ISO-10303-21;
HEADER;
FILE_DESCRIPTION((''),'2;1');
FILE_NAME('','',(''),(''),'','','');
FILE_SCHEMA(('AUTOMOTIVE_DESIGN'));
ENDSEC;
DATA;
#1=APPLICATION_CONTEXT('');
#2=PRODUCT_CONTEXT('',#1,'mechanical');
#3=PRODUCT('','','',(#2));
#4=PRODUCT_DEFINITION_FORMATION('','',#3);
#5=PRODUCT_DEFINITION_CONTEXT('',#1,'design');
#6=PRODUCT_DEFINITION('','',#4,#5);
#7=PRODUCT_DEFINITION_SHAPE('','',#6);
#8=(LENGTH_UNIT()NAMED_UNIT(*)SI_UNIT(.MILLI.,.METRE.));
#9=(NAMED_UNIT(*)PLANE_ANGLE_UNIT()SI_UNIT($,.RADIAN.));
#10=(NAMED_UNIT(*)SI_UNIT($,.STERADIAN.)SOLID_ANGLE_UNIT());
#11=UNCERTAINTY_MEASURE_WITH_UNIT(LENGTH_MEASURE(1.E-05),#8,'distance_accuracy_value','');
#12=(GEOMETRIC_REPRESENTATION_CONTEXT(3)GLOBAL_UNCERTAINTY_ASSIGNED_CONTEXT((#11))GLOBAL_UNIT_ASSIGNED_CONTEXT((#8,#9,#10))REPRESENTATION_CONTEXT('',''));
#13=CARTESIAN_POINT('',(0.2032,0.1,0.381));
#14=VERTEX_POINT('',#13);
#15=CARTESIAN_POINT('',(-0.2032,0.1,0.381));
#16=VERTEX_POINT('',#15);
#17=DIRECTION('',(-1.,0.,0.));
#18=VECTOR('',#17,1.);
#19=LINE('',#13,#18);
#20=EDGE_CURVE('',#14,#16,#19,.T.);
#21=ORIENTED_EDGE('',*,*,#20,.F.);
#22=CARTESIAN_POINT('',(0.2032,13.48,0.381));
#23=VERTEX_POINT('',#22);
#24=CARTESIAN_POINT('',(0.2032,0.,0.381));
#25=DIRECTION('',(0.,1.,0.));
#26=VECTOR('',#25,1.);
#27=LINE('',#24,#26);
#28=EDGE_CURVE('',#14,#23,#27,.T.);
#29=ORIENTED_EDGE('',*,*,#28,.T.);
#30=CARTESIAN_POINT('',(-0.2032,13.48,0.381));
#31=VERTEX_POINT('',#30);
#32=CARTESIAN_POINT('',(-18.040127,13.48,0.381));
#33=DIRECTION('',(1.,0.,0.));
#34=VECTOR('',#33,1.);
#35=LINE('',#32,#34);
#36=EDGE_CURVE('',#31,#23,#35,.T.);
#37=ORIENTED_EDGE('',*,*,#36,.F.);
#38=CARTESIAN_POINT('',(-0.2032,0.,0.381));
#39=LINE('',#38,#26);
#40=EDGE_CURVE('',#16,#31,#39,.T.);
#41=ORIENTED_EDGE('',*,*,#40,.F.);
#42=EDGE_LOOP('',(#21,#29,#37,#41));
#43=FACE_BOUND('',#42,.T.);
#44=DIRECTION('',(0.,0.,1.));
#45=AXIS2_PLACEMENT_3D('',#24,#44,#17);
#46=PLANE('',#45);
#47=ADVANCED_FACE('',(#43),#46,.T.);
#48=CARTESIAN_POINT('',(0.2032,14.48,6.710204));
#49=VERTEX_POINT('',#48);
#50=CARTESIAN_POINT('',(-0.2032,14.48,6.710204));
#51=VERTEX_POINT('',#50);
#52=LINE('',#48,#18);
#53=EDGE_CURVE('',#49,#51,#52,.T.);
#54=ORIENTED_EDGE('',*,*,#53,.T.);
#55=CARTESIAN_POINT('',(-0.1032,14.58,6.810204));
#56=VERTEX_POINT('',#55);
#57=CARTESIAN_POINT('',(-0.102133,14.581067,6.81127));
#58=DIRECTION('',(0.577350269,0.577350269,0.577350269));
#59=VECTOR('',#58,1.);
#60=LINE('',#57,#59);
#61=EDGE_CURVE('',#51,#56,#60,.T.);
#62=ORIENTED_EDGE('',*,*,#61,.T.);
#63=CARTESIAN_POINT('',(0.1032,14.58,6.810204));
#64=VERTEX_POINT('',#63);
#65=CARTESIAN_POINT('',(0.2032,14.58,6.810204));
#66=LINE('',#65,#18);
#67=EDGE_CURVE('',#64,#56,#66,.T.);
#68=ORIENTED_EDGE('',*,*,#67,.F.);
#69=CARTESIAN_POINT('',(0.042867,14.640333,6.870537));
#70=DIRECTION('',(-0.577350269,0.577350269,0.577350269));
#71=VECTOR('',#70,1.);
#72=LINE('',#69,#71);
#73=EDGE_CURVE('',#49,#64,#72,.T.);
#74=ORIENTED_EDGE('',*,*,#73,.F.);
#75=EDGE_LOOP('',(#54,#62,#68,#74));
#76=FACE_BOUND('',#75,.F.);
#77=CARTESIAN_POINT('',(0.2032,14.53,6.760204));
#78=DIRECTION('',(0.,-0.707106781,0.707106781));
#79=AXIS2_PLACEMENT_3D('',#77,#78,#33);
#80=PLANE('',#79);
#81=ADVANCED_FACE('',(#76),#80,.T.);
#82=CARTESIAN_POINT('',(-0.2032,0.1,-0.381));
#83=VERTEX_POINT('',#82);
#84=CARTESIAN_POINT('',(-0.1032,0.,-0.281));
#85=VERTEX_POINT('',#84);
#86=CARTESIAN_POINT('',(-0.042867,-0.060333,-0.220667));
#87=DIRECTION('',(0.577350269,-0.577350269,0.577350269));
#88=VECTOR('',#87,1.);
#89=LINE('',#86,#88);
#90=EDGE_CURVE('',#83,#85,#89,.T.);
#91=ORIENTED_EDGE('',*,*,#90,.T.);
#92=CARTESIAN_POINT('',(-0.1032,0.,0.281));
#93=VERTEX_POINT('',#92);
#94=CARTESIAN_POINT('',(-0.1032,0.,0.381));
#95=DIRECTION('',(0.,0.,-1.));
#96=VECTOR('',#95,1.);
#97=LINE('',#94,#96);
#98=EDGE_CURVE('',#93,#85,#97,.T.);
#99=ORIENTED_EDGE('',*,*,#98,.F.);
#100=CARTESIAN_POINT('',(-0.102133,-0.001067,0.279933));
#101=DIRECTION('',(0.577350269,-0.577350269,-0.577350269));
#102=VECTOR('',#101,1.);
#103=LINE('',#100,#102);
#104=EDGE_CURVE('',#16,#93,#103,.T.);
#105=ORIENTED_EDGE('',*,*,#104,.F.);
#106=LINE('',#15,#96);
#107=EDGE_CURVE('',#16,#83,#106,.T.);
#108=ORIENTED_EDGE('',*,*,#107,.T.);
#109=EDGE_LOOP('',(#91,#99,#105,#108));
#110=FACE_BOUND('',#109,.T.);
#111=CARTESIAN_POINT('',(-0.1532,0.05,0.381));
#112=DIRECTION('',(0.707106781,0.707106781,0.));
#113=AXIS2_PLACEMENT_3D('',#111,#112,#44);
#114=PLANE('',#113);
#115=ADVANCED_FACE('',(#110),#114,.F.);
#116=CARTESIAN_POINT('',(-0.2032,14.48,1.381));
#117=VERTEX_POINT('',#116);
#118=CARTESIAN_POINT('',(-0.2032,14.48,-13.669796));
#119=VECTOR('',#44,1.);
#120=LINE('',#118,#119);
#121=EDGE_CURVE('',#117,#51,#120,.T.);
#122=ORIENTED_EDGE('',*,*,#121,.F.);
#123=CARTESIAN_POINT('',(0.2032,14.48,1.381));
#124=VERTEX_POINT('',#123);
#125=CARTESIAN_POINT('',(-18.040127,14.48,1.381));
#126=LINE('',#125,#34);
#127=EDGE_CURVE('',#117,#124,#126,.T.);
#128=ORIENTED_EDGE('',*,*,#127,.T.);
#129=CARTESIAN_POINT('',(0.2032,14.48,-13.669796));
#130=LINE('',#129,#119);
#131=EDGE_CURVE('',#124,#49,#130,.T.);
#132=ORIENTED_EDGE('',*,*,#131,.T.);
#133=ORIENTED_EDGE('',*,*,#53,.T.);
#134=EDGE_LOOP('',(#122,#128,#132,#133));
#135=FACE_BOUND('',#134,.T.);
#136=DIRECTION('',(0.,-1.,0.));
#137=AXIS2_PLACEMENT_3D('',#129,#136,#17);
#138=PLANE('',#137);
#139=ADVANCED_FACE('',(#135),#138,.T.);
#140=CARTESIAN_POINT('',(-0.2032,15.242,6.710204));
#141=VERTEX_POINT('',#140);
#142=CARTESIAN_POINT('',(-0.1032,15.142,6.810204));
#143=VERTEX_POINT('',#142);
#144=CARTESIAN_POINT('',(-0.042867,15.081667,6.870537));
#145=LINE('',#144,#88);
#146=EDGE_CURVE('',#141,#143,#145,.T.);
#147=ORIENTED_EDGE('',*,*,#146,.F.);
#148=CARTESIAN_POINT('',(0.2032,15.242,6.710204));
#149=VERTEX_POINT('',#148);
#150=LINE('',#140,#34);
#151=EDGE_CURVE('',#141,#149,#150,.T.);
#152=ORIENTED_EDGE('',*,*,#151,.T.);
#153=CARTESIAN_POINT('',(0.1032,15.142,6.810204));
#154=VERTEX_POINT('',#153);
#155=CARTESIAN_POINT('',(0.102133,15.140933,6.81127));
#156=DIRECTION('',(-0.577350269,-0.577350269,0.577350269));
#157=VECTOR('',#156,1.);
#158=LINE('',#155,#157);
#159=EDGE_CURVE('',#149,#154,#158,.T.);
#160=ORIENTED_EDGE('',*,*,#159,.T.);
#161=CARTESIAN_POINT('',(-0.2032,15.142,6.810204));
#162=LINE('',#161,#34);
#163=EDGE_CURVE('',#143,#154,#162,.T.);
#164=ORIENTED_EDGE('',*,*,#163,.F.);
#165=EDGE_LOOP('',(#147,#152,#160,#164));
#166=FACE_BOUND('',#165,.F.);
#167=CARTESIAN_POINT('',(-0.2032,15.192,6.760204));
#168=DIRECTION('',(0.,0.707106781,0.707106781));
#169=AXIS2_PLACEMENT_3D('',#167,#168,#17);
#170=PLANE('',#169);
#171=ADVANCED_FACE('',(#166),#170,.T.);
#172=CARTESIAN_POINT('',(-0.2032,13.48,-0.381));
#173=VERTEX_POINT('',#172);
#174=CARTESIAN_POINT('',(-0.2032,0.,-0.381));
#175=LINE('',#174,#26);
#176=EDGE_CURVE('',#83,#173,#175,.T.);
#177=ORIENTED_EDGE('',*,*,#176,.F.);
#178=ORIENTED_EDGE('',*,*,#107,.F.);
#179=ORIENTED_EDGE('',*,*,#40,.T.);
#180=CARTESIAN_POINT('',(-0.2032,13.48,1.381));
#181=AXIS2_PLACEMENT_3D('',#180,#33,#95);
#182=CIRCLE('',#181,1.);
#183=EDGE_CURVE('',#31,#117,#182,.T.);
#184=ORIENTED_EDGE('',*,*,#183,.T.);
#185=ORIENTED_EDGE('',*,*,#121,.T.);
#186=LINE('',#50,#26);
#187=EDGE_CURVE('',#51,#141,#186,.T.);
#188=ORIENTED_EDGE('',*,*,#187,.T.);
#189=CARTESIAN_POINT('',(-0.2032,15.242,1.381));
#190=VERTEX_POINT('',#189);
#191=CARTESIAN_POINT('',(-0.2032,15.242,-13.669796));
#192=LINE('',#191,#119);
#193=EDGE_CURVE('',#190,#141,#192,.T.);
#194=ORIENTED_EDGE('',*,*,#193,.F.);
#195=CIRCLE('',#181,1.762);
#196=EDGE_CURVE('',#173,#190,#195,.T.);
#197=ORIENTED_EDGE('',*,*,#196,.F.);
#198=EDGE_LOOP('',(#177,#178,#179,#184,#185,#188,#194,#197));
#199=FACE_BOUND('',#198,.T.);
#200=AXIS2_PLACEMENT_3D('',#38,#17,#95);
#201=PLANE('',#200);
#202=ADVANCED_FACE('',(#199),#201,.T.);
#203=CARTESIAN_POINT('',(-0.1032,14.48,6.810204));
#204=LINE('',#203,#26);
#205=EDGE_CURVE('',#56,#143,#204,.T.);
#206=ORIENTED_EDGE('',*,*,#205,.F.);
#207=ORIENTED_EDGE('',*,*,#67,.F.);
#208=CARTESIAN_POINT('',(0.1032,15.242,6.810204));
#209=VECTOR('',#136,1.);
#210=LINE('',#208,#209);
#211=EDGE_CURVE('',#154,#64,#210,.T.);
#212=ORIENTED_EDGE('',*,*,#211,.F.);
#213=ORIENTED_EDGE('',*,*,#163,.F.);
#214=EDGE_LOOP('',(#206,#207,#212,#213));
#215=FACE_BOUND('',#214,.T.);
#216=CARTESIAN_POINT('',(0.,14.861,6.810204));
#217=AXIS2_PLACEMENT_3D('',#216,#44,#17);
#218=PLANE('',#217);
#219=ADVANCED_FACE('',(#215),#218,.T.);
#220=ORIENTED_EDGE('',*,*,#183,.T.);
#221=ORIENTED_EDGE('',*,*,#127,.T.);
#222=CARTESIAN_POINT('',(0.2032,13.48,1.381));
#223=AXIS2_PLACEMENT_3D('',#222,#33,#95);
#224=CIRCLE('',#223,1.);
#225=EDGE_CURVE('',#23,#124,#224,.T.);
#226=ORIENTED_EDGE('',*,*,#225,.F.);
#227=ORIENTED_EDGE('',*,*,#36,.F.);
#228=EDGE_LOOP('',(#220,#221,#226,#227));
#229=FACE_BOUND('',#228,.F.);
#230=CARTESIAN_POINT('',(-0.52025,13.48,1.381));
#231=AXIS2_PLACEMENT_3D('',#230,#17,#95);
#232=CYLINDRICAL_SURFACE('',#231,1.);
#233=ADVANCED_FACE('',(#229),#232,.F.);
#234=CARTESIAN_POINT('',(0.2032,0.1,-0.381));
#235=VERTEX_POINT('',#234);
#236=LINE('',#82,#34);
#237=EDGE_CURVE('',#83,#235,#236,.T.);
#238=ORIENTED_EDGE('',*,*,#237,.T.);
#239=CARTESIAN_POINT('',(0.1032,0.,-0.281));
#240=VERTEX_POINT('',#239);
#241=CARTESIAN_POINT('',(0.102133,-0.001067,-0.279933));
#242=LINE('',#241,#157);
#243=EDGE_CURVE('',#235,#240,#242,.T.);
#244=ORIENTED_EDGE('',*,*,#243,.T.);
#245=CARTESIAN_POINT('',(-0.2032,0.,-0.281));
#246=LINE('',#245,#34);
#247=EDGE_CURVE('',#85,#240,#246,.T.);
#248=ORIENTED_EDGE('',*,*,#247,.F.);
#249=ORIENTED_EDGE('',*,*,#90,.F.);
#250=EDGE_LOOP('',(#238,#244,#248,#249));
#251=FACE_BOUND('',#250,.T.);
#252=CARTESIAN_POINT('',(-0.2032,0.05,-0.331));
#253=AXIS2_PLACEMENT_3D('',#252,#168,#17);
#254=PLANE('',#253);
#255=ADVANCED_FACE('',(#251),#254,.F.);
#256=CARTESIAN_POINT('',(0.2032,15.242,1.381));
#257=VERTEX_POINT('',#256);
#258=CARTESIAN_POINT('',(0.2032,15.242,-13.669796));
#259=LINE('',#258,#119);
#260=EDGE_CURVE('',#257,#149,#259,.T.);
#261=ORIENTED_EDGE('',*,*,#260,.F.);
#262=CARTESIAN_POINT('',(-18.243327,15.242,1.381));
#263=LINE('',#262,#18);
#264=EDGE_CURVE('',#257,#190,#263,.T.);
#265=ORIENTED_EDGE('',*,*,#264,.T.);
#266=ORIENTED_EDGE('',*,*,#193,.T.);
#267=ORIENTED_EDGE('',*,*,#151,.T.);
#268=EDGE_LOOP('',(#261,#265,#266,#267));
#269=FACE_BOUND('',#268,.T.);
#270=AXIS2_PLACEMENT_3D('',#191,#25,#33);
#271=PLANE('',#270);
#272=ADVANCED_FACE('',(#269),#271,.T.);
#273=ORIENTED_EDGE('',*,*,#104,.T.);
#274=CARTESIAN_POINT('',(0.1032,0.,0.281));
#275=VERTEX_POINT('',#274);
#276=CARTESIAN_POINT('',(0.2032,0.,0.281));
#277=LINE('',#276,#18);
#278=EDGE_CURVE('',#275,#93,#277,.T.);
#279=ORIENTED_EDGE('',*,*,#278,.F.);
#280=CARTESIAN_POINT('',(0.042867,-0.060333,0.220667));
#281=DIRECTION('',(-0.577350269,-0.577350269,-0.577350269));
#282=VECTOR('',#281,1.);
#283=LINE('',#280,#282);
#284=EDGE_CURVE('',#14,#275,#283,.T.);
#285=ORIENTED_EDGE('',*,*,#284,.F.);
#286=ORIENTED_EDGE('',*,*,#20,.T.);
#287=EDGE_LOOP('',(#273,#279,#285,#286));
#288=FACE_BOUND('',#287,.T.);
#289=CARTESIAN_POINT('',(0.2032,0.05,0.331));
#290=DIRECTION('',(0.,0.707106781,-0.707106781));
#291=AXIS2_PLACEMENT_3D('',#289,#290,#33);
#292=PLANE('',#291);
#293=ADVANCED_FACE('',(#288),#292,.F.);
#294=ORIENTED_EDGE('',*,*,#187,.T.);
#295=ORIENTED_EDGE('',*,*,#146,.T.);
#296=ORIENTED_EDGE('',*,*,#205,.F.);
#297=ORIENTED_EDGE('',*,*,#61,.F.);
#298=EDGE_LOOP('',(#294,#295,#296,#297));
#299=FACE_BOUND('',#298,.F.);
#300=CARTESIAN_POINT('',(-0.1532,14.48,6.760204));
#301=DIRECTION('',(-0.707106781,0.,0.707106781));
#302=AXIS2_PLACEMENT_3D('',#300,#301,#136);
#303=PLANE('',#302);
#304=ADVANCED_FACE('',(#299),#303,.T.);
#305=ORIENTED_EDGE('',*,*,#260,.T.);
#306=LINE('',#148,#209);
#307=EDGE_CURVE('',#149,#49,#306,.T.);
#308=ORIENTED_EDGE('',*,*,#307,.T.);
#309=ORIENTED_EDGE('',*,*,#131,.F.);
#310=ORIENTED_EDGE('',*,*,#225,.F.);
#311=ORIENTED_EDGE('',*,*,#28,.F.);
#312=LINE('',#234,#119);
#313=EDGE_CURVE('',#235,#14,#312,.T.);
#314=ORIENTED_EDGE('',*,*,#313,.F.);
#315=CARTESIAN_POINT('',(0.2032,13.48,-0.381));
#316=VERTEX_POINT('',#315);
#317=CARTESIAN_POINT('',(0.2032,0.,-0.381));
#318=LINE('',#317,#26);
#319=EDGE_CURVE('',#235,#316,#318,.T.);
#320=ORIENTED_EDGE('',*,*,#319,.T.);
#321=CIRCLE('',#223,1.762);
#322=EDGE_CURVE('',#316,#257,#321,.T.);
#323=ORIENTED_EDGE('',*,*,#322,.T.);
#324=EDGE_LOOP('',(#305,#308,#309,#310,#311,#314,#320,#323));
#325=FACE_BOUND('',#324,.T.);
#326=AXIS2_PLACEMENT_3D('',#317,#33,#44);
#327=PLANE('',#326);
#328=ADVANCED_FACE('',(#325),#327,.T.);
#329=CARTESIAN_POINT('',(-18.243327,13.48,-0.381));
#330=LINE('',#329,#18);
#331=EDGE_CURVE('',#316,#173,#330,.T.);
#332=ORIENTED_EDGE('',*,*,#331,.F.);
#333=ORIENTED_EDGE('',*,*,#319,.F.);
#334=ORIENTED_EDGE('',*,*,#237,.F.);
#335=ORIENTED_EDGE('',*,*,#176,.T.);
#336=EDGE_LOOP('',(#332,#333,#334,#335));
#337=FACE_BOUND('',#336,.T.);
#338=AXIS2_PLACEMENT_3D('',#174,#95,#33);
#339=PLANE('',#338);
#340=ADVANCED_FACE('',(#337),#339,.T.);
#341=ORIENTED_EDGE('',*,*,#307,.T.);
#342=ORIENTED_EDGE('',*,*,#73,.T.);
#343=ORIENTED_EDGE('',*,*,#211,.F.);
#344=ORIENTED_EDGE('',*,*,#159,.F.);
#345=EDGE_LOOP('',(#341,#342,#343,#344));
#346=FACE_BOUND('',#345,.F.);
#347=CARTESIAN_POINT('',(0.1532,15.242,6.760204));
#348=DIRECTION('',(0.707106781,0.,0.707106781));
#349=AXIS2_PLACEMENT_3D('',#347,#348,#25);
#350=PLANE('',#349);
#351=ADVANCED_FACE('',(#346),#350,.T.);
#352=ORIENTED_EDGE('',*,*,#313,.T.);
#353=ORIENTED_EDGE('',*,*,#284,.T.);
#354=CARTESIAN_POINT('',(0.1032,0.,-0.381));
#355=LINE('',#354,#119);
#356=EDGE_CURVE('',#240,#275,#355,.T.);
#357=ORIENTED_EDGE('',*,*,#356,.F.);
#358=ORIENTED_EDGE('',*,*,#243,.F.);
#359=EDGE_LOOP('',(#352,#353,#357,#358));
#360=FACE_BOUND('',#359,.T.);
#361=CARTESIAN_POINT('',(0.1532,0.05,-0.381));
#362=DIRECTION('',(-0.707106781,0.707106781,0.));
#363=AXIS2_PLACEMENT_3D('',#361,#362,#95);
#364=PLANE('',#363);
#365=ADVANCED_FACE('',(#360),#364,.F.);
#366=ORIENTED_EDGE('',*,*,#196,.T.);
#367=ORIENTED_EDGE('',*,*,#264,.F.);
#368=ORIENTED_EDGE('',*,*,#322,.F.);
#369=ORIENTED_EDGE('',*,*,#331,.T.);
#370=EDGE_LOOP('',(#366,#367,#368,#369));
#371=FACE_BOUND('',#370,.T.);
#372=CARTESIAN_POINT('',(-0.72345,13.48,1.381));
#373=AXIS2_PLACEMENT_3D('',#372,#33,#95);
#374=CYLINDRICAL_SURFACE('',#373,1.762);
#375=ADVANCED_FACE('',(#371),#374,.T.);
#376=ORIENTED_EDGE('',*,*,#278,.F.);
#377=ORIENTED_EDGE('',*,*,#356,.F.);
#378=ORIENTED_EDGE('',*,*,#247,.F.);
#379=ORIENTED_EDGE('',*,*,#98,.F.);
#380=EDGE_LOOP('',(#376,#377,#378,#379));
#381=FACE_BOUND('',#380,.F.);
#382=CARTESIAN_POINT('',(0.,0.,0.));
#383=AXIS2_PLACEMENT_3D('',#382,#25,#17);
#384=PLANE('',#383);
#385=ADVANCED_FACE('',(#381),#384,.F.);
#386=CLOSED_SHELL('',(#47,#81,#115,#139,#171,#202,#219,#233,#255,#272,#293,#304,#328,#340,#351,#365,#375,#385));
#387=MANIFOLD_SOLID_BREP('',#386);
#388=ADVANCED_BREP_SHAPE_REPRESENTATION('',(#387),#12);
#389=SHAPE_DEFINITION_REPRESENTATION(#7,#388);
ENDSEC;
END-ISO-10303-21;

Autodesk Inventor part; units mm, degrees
ref_plane "YZ Plane" through (0, 0, 0) normal (1, 0, 0) x (0, 1, 0)
ref_plane "XZ Plane" through (0, 0, 0) normal (0, 1, 0) x (-1, 0, 0)
ref_plane "XY Plane" through (0, 0, 0) normal (0, 0, 1) x (1, 0, 0)
sketch "Sketch1" plane through (0, 0, 0) normal (0, 1, 0) x (-1, 0, 0)
  line L0 (0.2032, -0.381) -> (-0.2032, -0.381)
  line L1 (-0.2032, -0.381) -> (-0.2032, 0.381)
  line L2 (-0.2032, 0.381) -> (0.2032, 0.381)
  line L3 (0.2032, 0.381) -> (0.2032, -0.381)
  line L4 (0.2032, -0.381) -> (-0.2032, 0.381) construction
  line L5 (-0.2032, -0.381) -> (0.2032, 0.381) construction
  point P0 (0, 0)
  dimension "d0" = 0.4064
  dimension "d1" = 0.762
extrude "Extrusion1" add sketch "Sketch1" along normal blind 20.48
chamfer "Chamfer1" distance 0.1 angle 45 8 edges at (0.2032, 20.48, 0) (0, 20.48, -0.381) (0, 20.48, 0.381) (-0.2032, 20.48, 0) (0.2032, 0, 0) (0, 0, -0.381) (0, 0, 0.381) (-0.2032, 0, 0)
sketch "Sketch2" plane through (-0.2032, 0.1, 0.381) normal (0, 0, 1) x (1, 0, 0)
  line L0 (-1.0405, 13.38) -> (1.7368, 13.38)
  point P0 (0.2032, -0.1)
  dimension "d7" = 13.48
bend part "Bend Part1" radius 1 angle 90 line through (-1.2437, 13.48, 0.381) along (1, 0, 0) centre toward (0, 0, 1) moving side (0, 1, 0) both sides no
properties part number "PinRight1" material "Gold"
